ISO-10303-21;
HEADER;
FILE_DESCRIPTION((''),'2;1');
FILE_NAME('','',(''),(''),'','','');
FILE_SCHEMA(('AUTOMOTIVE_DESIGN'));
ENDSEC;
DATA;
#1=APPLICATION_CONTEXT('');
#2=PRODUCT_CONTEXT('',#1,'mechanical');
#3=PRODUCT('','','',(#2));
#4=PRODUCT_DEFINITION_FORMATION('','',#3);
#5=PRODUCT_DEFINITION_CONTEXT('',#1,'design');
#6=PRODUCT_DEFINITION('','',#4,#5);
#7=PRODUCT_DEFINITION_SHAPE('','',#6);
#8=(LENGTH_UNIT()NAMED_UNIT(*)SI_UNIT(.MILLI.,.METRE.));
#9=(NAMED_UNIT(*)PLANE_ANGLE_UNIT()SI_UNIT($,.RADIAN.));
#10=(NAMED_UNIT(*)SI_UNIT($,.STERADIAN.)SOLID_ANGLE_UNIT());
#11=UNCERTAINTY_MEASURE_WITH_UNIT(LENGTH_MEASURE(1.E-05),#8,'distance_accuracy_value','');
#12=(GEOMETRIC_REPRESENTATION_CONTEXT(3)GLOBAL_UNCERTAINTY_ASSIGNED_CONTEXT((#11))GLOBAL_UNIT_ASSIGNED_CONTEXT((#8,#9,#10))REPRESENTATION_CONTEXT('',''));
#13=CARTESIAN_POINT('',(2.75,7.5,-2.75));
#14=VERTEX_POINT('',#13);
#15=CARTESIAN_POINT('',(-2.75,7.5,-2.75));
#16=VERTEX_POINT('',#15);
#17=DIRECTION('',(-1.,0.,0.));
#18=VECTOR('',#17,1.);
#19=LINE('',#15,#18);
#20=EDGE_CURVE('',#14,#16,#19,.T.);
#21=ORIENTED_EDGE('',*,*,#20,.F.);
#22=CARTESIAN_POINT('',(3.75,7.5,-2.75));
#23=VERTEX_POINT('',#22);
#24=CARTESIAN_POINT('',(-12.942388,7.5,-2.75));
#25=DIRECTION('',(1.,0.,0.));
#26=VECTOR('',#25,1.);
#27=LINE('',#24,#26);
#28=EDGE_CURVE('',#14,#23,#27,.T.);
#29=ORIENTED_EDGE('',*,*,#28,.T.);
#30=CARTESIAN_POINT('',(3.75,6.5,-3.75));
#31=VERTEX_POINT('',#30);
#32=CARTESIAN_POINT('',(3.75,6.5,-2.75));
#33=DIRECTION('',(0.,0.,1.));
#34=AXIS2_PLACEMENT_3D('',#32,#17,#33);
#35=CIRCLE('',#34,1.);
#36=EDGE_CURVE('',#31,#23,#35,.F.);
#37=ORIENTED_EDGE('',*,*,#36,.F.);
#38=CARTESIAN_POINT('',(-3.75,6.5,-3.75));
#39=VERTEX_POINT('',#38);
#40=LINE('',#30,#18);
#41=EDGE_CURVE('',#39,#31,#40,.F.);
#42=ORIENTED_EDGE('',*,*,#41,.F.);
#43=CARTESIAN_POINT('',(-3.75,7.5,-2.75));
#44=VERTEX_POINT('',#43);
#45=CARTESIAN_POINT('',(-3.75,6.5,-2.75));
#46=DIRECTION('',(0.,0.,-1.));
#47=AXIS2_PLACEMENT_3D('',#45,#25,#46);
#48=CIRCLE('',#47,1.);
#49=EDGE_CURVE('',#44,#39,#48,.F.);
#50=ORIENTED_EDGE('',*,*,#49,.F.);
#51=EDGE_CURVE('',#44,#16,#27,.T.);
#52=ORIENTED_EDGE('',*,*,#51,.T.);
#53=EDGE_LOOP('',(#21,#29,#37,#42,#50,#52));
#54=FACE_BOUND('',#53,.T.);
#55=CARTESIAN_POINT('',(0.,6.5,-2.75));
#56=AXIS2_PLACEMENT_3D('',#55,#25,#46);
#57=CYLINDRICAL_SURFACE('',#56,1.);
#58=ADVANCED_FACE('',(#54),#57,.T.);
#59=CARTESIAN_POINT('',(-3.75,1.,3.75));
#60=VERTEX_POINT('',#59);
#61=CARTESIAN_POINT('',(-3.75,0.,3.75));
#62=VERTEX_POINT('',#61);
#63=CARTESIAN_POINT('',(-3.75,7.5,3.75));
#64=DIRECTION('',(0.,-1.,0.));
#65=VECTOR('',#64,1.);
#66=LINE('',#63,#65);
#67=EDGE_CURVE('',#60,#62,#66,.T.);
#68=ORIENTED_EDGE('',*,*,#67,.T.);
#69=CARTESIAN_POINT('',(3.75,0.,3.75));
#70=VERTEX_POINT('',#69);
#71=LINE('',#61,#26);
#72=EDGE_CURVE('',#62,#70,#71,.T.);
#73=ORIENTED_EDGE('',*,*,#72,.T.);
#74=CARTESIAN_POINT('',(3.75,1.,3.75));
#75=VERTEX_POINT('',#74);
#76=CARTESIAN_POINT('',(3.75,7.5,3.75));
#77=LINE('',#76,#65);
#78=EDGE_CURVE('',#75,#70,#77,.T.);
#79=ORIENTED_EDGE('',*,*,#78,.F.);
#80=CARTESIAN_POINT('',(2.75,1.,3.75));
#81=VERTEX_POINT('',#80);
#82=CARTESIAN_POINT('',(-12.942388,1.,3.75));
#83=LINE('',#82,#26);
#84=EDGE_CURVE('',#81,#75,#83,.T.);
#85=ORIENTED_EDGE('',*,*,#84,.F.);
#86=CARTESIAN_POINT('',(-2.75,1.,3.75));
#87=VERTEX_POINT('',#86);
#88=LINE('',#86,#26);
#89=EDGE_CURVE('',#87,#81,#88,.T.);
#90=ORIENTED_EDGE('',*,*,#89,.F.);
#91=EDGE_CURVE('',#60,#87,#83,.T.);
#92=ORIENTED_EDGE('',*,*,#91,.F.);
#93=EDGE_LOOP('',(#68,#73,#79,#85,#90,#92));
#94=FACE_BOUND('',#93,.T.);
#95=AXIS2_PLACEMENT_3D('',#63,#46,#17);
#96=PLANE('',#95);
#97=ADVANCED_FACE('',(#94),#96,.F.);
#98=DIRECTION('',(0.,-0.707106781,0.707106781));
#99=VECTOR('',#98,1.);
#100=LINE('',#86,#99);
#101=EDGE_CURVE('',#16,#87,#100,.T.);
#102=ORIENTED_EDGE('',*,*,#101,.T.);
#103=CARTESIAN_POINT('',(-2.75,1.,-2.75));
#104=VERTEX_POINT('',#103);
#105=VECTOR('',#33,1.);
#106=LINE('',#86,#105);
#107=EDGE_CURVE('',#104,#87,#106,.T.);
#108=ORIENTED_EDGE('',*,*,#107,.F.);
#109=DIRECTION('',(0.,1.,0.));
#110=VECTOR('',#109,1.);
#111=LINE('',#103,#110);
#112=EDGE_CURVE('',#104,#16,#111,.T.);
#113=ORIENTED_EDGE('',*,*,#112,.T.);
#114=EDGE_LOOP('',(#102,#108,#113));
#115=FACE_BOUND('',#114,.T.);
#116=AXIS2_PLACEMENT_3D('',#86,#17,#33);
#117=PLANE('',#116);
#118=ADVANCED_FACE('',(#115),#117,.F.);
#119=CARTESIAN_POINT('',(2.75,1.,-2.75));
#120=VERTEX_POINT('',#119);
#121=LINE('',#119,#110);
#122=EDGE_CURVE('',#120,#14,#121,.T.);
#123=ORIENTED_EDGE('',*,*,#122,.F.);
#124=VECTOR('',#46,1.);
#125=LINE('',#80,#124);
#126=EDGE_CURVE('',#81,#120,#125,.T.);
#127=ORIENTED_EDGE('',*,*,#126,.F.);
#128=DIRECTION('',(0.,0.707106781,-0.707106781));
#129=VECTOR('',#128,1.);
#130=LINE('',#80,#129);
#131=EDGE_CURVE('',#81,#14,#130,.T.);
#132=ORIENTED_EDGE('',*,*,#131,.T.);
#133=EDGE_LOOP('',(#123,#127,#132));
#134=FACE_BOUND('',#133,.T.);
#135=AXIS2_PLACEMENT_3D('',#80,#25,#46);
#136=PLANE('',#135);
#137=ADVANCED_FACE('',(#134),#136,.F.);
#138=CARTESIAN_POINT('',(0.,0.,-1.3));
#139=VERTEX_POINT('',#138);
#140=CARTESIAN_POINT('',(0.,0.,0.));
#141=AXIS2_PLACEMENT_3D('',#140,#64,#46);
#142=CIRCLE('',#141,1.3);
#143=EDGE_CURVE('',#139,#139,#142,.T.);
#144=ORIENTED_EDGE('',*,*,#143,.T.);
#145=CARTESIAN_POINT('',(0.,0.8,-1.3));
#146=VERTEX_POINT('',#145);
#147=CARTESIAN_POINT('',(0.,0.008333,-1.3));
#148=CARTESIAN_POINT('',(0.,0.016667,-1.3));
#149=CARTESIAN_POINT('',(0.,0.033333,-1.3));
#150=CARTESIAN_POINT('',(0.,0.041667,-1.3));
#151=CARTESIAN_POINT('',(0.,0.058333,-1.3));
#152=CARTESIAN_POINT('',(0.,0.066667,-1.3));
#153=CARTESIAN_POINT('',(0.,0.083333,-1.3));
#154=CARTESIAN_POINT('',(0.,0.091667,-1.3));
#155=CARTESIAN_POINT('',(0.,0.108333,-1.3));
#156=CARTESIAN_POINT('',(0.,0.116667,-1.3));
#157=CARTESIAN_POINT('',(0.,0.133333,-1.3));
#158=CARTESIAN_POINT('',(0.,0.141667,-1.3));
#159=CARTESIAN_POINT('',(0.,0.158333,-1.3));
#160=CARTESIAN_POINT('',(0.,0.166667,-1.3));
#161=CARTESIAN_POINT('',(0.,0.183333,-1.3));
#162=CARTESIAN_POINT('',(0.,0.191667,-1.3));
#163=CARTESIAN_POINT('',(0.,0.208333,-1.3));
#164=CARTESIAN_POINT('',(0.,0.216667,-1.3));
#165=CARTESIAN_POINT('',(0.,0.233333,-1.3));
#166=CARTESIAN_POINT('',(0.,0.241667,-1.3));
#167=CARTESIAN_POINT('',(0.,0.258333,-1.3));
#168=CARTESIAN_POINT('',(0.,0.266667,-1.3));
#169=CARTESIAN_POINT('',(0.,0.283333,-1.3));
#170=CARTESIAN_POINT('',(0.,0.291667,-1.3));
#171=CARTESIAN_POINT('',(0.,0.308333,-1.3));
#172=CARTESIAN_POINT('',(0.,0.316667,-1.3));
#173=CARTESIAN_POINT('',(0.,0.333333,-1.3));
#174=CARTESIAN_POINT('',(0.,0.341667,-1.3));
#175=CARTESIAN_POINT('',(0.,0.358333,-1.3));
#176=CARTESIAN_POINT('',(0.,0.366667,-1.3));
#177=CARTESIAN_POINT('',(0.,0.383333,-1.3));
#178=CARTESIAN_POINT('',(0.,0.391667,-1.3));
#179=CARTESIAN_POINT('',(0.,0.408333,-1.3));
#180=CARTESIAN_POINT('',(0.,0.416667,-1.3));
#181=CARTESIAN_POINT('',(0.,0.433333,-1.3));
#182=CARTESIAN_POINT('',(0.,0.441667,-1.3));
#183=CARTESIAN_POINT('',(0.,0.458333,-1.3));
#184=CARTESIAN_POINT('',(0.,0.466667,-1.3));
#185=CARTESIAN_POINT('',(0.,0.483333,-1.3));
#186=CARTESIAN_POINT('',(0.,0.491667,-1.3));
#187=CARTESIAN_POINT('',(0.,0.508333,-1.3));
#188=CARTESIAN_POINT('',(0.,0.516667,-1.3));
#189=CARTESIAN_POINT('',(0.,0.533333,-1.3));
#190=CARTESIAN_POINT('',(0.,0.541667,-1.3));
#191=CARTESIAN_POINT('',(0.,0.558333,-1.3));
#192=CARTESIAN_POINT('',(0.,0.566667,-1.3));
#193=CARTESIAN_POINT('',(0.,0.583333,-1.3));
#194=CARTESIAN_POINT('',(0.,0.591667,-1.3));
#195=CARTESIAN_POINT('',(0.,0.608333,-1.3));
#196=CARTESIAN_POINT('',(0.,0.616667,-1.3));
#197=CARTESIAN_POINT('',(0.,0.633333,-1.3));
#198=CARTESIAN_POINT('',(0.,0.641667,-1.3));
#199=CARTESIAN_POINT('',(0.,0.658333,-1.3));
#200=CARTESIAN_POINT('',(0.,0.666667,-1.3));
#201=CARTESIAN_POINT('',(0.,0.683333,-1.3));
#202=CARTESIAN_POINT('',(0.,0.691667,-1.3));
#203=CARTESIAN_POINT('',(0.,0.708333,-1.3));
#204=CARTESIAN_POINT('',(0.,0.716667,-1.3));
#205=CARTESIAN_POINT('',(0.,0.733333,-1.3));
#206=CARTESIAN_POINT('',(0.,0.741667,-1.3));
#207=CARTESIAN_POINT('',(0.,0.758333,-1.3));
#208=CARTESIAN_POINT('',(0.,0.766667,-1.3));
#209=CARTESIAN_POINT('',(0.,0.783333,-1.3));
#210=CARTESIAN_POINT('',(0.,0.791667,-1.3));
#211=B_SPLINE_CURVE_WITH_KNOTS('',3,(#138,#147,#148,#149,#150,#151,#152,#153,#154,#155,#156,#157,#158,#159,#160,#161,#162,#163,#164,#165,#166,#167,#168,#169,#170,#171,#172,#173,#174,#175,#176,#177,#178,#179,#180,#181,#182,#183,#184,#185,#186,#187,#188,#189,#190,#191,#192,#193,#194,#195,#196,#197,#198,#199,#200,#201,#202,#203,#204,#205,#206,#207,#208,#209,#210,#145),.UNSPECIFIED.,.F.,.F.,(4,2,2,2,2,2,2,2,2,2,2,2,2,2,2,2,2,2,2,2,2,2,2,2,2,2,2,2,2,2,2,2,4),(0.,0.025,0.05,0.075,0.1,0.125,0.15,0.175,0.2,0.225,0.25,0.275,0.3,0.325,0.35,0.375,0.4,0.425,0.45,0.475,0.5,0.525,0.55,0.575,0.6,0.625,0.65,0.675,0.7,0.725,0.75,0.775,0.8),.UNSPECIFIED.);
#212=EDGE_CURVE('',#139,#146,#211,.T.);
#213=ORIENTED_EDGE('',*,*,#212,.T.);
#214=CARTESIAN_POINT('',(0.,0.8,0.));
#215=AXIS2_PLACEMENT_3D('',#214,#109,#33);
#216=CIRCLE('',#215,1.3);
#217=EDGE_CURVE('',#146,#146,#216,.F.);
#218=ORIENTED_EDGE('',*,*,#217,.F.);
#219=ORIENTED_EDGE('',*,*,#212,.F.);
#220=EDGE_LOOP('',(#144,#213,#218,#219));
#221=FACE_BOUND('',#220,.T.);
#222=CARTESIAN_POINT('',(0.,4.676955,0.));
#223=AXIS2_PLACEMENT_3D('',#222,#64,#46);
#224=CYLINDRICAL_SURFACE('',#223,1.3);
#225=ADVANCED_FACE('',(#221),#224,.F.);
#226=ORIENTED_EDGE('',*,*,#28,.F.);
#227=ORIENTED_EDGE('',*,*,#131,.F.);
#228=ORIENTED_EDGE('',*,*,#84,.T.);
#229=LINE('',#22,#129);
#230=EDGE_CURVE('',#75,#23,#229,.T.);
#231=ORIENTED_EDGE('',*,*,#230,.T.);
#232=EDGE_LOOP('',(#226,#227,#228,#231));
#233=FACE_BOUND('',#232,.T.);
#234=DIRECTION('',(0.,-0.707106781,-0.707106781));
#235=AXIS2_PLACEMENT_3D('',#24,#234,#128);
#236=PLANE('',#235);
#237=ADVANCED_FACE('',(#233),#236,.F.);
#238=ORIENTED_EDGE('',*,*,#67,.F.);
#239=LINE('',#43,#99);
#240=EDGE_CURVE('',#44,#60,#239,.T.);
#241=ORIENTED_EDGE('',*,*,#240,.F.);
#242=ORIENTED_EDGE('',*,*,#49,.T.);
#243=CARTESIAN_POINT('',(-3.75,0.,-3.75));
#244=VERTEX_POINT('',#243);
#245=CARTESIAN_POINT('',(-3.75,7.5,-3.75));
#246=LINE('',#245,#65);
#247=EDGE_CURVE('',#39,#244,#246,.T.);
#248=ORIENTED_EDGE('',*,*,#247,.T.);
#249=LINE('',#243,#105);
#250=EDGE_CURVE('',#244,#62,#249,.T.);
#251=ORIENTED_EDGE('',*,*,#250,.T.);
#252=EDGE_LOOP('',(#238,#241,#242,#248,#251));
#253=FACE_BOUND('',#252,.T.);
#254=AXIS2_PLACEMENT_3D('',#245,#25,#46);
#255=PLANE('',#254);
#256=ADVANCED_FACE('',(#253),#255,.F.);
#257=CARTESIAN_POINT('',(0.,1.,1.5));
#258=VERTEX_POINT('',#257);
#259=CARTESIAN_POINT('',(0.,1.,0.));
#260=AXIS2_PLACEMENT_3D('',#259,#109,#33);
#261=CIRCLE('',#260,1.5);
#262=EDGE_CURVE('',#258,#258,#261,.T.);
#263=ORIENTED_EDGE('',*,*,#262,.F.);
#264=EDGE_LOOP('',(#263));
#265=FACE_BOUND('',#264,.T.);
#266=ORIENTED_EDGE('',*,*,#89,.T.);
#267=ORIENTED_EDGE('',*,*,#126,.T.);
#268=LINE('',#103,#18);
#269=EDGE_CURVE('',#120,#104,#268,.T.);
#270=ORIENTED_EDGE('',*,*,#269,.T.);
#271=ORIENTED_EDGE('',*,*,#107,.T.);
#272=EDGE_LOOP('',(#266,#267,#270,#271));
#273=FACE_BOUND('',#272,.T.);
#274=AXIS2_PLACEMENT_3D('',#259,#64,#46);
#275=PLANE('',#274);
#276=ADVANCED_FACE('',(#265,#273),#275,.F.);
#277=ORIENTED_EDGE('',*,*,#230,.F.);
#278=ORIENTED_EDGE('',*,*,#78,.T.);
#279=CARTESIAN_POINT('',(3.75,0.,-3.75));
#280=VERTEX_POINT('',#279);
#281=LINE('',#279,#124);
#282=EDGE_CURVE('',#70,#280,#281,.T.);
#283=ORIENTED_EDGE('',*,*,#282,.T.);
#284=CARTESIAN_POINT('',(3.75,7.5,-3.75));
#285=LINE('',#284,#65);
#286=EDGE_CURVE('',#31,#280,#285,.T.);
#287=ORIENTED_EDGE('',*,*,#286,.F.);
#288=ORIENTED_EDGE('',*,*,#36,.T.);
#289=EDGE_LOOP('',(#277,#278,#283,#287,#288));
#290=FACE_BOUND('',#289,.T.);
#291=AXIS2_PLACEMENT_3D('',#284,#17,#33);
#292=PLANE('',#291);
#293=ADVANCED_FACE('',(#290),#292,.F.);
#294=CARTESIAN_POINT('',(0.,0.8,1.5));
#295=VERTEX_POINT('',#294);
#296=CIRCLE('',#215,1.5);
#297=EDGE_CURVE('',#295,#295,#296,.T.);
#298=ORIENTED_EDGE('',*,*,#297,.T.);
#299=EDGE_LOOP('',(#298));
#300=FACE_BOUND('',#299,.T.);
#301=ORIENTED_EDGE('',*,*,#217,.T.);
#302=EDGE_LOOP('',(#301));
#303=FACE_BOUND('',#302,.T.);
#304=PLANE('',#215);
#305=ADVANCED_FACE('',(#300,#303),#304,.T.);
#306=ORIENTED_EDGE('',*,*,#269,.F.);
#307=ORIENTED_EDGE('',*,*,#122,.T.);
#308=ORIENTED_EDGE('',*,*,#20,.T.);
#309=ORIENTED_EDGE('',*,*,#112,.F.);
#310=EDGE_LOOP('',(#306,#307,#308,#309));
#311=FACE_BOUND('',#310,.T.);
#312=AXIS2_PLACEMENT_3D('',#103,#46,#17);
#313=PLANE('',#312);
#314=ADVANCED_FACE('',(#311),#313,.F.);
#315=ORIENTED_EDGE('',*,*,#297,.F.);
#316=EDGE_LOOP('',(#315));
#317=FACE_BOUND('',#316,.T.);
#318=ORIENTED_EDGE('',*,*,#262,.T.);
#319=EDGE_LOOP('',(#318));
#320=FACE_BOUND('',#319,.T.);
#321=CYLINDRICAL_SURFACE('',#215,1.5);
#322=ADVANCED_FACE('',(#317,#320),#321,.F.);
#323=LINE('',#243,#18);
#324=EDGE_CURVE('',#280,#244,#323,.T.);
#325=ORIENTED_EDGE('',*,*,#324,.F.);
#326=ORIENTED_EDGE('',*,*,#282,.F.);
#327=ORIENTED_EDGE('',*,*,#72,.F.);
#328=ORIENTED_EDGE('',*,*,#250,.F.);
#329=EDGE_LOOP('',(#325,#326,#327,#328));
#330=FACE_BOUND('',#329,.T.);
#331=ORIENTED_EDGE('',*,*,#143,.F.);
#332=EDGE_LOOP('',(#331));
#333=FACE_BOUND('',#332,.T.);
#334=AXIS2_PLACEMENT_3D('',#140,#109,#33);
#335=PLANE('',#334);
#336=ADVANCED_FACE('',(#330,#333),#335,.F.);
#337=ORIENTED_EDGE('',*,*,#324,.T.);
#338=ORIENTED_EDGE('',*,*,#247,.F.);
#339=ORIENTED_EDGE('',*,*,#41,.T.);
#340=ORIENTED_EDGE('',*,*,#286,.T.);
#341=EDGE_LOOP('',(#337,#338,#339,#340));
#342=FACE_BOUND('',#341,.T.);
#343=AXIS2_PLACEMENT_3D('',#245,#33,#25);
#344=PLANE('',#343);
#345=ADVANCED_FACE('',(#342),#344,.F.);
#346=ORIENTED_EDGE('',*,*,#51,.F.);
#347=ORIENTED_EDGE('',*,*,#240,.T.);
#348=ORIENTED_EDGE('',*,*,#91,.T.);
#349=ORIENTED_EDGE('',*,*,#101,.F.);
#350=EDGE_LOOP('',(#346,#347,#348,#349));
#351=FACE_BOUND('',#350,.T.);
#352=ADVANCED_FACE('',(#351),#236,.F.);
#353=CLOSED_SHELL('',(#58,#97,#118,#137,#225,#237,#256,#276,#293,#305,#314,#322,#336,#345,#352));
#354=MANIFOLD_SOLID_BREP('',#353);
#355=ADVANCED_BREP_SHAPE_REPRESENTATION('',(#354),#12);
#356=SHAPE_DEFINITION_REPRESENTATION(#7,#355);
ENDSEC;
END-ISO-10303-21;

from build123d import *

# Parameters (mm, degrees)
SKETCH1_W           = 7.5
SKETCH1_H           = 7.5
BOSS_EXTRUDE1_DEPTH = 7.5
SKETCH2_W           = 5.5
SKETCH2_H           = 6.5
CUT_EXTRUDE1_DEPTH  = 6.5
CUT_EXTRUDE2_REACH  = 13.25
SKETCH4_R           = 1.3
CUT_EXTRUDE3_DEPTH  = 1
SKETCH5_R           = 1.5
CUT_EXTRUDE4_DEPTH  = 0.2
FILLET1_R           = 1


with BuildPart() as part:
    # Sketch1 → Boss-Extrude1 (new body)
    with BuildSketch(Plane(origin=(0, 0, 0), x_dir=(1, 0, 0), z_dir=(0, 1, 0))):
        Rectangle(SKETCH1_W, SKETCH1_H)
    extrude(amount=BOSS_EXTRUDE1_DEPTH)

    # Sketch2 → Cut-Extrude1 (cut)
    with BuildSketch(Plane(origin=(0, 7.5, 0), x_dir=(1, 0, 0), z_dir=(0, 1, 0))):
        with Locations((0, -0.5)):
            Rectangle(SKETCH2_W, SKETCH2_H)
    extrude(amount=-CUT_EXTRUDE1_DEPTH, mode=Mode.SUBTRACT)

    # Cut-Extrude2: up to this face of the body (flat: up to its plane)
    cut_extrude2_end = Plane(part.part.faces().sort_by_distance((-3.75, 3.75, 0))[0])
    # Sketch3 → Cut-Extrude2 (cut, up to the picked face)
    with BuildSketch(Plane(origin=(3.75, 0, 0), x_dir=(0, 0, -1), z_dir=(1, 0, 0)), mode=Mode.PRIVATE) as cut_extrude2_sk1:
        Polygon((-3.75, 7.5), (2.75, 7.5), (-3.75, 1), align=None)
    cut_extrude2_tool1 = split(extrude(cut_extrude2_sk1.sketch, amount=-CUT_EXTRUDE2_REACH, mode=Mode.PRIVATE), bisect_by=cut_extrude2_end, keep=Keep.BOTH, mode=Mode.PRIVATE)
    add(cut_extrude2_tool1.solids().sort_by(Axis((3.75, 5.333333, 1.583333), (-1, 0, 0)))[0], mode=Mode.SUBTRACT)

    # Sketch4 → Cut-Extrude3 (cut)
    with BuildSketch(Plane.XZ):
        with Locations(Location((0, 0, 0), (0, 0, 270))):
            Circle(SKETCH4_R)
    extrude(amount=-CUT_EXTRUDE3_DEPTH, mode=Mode.SUBTRACT)

    # Sketch5 → Cut-Extrude4 (cut)
    with BuildSketch(Plane(origin=(0, 1, 0), x_dir=(1, 0, 0), z_dir=(0, 1, 0))):
        with Locations(Location((0, 0, 0), (0, 0, 270))):
            Circle(SKETCH5_R)
    extrude(amount=-CUT_EXTRUDE4_DEPTH, mode=Mode.SUBTRACT)

    # Fillet1
    fillet1_edges = [part.edges().sort_by_distance(p)[0] for p in [
        (0, 7.5, -3.75),
    ]]
    fillet(fillet1_edges, radius=FILLET1_R - 0.0001)  # a hair under: the kernel refuses the full size


solid = part.part
